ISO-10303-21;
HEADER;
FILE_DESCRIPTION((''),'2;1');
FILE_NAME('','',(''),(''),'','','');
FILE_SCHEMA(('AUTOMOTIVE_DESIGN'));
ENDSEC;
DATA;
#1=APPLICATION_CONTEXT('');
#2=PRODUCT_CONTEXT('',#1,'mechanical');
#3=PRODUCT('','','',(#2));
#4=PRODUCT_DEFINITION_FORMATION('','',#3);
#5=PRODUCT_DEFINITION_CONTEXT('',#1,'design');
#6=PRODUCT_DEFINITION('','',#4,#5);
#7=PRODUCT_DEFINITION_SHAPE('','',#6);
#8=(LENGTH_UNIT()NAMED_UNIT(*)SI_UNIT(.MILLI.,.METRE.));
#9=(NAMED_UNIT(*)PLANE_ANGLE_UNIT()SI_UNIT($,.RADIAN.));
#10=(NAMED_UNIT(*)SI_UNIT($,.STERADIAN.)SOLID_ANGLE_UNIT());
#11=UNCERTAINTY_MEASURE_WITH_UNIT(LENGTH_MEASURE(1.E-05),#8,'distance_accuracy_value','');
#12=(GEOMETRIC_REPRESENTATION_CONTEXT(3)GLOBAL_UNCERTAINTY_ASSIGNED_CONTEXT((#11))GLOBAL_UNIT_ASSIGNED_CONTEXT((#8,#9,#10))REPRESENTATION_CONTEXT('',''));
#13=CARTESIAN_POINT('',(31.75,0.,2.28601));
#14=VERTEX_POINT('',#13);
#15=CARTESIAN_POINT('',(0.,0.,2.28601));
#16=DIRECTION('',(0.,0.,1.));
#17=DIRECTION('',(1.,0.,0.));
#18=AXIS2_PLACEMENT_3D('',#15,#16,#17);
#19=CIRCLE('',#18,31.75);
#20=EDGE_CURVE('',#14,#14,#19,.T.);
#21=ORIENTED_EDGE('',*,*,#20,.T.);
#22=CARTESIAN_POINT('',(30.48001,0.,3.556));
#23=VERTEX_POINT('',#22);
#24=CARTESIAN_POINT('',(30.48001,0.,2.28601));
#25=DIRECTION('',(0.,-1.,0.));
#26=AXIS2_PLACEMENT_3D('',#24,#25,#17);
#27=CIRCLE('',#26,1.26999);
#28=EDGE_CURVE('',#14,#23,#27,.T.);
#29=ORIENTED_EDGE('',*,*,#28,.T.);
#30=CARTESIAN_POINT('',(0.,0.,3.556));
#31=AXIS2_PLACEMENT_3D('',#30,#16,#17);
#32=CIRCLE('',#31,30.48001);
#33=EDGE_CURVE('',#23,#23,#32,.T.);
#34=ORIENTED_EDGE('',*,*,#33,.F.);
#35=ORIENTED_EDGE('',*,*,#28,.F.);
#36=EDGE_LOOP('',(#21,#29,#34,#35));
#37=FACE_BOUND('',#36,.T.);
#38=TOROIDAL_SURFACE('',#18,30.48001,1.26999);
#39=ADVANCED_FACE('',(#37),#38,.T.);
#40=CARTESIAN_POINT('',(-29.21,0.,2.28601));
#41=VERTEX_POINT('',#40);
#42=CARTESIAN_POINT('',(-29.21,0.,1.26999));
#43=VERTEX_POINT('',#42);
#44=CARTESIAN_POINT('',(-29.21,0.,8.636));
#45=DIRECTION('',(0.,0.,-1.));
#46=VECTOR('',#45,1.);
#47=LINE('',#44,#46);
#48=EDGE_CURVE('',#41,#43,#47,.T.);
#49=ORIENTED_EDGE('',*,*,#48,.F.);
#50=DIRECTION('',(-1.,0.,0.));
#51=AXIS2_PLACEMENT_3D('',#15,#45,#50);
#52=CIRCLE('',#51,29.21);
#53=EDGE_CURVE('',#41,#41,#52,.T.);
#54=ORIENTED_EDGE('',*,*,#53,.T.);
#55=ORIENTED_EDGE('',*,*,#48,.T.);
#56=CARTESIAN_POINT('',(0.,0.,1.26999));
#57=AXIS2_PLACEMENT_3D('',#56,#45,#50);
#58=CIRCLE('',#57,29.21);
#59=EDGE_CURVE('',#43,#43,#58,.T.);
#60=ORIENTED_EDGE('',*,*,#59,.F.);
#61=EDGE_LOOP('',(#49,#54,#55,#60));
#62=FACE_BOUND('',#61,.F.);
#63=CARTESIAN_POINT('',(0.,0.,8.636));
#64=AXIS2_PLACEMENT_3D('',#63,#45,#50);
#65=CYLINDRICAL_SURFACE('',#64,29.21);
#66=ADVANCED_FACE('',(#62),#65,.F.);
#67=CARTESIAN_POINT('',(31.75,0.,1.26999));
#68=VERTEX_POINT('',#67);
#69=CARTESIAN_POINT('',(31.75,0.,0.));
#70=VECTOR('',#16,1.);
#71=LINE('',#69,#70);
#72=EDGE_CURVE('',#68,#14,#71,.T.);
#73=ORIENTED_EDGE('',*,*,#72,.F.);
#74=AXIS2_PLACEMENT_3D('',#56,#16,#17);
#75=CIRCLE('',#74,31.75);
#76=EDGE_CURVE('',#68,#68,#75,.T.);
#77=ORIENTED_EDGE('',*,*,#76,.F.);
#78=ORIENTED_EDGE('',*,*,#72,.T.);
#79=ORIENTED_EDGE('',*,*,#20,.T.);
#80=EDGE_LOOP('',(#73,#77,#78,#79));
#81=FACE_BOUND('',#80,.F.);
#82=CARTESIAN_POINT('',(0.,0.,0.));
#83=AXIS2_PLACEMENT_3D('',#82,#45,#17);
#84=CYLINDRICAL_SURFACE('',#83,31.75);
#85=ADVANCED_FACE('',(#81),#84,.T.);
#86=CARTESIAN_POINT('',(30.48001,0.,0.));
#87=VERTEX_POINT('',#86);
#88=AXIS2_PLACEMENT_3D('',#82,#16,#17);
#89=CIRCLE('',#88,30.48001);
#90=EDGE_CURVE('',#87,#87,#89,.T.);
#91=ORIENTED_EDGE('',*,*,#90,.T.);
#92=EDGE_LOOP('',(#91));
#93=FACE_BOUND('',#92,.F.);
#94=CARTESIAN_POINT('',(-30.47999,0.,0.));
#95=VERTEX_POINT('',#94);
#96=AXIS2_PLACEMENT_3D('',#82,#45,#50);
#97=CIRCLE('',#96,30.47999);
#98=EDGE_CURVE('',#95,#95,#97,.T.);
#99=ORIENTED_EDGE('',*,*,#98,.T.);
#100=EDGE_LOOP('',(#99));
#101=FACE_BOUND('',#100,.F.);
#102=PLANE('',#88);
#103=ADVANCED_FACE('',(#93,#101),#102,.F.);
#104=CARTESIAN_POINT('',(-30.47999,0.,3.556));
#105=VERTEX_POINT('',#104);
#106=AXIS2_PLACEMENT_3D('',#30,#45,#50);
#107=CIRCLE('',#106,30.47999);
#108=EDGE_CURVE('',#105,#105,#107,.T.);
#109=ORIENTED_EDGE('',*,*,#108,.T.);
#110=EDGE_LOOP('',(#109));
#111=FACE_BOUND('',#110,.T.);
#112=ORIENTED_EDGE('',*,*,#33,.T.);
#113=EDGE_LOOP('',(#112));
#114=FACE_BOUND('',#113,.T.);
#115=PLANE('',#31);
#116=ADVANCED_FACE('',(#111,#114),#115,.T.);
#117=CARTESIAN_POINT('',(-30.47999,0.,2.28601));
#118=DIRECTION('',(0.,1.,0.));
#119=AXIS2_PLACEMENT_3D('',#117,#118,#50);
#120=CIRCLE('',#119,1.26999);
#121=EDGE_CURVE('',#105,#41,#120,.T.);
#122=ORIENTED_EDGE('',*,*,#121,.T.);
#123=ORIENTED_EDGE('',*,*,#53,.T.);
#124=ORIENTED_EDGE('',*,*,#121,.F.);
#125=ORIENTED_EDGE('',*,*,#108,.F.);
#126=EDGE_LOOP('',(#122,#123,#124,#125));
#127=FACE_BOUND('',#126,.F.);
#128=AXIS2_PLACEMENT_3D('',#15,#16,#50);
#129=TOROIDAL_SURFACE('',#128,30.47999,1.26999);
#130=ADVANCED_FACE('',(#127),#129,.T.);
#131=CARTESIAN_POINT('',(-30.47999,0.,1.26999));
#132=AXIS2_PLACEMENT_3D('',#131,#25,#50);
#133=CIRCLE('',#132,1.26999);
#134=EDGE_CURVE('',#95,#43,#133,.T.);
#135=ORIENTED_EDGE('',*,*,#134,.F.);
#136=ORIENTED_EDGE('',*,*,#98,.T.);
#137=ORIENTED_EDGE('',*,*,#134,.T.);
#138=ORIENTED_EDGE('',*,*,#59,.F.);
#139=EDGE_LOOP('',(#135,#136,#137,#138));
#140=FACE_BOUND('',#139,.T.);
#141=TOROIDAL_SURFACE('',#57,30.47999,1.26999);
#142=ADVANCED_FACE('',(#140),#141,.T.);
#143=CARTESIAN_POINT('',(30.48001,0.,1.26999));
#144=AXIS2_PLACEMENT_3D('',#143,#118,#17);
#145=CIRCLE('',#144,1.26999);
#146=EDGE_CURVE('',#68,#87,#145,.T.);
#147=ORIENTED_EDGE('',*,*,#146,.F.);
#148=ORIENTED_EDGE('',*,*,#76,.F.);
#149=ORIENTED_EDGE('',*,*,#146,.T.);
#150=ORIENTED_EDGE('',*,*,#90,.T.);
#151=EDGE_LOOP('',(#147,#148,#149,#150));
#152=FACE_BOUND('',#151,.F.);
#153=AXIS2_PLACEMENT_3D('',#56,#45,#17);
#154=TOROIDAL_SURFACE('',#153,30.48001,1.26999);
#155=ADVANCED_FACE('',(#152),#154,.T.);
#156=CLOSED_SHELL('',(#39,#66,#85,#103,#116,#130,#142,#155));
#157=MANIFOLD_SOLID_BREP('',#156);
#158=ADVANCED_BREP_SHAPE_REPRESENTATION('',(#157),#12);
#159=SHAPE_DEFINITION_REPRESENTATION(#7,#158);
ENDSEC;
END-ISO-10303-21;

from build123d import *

# Parameters (mm, degrees)
F0_R     = 31.75
F1_DEPTH = 3.556
F3_D     = 58.42
F3_DEPTH = 5.08
F3_TIP   = 17.5511386818
F4_R     = 1.26999


# Not quite as in the source:
# - a fillet or chamfer is up to 0.001 mm smaller than in the source, because OpenCascade refuses the exact size


with BuildPart() as f1:
    # F0 (on Top) → F1 (new body)
    with BuildSketch(Plane.XY):
        Circle(F0_R)
    extrude(amount=F1_DEPTH)

    # F3
    with Locations(Plane.XY.offset(3.556)):
        with Locations((0, 0)):
            Hole(F3_D / 2, depth=F3_DEPTH)
            with Locations((0, 0, -(F3_DEPTH + F3_TIP / 2))):  # 118° drill point
                Cone(0, F3_D / 2, F3_TIP, mode=Mode.SUBTRACT)

    # F4 (radius 1.27 in the source; OpenCascade refuses exactly that, so slightly less here)
    f4_edges = [f1.edges().sort_by_distance(p)[0] for p in [
        (-31.75, 0, 0),
        (-31.75, 0, 3.556),
        (-29.21, 0, 0),
        (-29.21, 0, 3.556),
    ]]
    fillet(f4_edges, radius=F4_R)


solid = f1.part
